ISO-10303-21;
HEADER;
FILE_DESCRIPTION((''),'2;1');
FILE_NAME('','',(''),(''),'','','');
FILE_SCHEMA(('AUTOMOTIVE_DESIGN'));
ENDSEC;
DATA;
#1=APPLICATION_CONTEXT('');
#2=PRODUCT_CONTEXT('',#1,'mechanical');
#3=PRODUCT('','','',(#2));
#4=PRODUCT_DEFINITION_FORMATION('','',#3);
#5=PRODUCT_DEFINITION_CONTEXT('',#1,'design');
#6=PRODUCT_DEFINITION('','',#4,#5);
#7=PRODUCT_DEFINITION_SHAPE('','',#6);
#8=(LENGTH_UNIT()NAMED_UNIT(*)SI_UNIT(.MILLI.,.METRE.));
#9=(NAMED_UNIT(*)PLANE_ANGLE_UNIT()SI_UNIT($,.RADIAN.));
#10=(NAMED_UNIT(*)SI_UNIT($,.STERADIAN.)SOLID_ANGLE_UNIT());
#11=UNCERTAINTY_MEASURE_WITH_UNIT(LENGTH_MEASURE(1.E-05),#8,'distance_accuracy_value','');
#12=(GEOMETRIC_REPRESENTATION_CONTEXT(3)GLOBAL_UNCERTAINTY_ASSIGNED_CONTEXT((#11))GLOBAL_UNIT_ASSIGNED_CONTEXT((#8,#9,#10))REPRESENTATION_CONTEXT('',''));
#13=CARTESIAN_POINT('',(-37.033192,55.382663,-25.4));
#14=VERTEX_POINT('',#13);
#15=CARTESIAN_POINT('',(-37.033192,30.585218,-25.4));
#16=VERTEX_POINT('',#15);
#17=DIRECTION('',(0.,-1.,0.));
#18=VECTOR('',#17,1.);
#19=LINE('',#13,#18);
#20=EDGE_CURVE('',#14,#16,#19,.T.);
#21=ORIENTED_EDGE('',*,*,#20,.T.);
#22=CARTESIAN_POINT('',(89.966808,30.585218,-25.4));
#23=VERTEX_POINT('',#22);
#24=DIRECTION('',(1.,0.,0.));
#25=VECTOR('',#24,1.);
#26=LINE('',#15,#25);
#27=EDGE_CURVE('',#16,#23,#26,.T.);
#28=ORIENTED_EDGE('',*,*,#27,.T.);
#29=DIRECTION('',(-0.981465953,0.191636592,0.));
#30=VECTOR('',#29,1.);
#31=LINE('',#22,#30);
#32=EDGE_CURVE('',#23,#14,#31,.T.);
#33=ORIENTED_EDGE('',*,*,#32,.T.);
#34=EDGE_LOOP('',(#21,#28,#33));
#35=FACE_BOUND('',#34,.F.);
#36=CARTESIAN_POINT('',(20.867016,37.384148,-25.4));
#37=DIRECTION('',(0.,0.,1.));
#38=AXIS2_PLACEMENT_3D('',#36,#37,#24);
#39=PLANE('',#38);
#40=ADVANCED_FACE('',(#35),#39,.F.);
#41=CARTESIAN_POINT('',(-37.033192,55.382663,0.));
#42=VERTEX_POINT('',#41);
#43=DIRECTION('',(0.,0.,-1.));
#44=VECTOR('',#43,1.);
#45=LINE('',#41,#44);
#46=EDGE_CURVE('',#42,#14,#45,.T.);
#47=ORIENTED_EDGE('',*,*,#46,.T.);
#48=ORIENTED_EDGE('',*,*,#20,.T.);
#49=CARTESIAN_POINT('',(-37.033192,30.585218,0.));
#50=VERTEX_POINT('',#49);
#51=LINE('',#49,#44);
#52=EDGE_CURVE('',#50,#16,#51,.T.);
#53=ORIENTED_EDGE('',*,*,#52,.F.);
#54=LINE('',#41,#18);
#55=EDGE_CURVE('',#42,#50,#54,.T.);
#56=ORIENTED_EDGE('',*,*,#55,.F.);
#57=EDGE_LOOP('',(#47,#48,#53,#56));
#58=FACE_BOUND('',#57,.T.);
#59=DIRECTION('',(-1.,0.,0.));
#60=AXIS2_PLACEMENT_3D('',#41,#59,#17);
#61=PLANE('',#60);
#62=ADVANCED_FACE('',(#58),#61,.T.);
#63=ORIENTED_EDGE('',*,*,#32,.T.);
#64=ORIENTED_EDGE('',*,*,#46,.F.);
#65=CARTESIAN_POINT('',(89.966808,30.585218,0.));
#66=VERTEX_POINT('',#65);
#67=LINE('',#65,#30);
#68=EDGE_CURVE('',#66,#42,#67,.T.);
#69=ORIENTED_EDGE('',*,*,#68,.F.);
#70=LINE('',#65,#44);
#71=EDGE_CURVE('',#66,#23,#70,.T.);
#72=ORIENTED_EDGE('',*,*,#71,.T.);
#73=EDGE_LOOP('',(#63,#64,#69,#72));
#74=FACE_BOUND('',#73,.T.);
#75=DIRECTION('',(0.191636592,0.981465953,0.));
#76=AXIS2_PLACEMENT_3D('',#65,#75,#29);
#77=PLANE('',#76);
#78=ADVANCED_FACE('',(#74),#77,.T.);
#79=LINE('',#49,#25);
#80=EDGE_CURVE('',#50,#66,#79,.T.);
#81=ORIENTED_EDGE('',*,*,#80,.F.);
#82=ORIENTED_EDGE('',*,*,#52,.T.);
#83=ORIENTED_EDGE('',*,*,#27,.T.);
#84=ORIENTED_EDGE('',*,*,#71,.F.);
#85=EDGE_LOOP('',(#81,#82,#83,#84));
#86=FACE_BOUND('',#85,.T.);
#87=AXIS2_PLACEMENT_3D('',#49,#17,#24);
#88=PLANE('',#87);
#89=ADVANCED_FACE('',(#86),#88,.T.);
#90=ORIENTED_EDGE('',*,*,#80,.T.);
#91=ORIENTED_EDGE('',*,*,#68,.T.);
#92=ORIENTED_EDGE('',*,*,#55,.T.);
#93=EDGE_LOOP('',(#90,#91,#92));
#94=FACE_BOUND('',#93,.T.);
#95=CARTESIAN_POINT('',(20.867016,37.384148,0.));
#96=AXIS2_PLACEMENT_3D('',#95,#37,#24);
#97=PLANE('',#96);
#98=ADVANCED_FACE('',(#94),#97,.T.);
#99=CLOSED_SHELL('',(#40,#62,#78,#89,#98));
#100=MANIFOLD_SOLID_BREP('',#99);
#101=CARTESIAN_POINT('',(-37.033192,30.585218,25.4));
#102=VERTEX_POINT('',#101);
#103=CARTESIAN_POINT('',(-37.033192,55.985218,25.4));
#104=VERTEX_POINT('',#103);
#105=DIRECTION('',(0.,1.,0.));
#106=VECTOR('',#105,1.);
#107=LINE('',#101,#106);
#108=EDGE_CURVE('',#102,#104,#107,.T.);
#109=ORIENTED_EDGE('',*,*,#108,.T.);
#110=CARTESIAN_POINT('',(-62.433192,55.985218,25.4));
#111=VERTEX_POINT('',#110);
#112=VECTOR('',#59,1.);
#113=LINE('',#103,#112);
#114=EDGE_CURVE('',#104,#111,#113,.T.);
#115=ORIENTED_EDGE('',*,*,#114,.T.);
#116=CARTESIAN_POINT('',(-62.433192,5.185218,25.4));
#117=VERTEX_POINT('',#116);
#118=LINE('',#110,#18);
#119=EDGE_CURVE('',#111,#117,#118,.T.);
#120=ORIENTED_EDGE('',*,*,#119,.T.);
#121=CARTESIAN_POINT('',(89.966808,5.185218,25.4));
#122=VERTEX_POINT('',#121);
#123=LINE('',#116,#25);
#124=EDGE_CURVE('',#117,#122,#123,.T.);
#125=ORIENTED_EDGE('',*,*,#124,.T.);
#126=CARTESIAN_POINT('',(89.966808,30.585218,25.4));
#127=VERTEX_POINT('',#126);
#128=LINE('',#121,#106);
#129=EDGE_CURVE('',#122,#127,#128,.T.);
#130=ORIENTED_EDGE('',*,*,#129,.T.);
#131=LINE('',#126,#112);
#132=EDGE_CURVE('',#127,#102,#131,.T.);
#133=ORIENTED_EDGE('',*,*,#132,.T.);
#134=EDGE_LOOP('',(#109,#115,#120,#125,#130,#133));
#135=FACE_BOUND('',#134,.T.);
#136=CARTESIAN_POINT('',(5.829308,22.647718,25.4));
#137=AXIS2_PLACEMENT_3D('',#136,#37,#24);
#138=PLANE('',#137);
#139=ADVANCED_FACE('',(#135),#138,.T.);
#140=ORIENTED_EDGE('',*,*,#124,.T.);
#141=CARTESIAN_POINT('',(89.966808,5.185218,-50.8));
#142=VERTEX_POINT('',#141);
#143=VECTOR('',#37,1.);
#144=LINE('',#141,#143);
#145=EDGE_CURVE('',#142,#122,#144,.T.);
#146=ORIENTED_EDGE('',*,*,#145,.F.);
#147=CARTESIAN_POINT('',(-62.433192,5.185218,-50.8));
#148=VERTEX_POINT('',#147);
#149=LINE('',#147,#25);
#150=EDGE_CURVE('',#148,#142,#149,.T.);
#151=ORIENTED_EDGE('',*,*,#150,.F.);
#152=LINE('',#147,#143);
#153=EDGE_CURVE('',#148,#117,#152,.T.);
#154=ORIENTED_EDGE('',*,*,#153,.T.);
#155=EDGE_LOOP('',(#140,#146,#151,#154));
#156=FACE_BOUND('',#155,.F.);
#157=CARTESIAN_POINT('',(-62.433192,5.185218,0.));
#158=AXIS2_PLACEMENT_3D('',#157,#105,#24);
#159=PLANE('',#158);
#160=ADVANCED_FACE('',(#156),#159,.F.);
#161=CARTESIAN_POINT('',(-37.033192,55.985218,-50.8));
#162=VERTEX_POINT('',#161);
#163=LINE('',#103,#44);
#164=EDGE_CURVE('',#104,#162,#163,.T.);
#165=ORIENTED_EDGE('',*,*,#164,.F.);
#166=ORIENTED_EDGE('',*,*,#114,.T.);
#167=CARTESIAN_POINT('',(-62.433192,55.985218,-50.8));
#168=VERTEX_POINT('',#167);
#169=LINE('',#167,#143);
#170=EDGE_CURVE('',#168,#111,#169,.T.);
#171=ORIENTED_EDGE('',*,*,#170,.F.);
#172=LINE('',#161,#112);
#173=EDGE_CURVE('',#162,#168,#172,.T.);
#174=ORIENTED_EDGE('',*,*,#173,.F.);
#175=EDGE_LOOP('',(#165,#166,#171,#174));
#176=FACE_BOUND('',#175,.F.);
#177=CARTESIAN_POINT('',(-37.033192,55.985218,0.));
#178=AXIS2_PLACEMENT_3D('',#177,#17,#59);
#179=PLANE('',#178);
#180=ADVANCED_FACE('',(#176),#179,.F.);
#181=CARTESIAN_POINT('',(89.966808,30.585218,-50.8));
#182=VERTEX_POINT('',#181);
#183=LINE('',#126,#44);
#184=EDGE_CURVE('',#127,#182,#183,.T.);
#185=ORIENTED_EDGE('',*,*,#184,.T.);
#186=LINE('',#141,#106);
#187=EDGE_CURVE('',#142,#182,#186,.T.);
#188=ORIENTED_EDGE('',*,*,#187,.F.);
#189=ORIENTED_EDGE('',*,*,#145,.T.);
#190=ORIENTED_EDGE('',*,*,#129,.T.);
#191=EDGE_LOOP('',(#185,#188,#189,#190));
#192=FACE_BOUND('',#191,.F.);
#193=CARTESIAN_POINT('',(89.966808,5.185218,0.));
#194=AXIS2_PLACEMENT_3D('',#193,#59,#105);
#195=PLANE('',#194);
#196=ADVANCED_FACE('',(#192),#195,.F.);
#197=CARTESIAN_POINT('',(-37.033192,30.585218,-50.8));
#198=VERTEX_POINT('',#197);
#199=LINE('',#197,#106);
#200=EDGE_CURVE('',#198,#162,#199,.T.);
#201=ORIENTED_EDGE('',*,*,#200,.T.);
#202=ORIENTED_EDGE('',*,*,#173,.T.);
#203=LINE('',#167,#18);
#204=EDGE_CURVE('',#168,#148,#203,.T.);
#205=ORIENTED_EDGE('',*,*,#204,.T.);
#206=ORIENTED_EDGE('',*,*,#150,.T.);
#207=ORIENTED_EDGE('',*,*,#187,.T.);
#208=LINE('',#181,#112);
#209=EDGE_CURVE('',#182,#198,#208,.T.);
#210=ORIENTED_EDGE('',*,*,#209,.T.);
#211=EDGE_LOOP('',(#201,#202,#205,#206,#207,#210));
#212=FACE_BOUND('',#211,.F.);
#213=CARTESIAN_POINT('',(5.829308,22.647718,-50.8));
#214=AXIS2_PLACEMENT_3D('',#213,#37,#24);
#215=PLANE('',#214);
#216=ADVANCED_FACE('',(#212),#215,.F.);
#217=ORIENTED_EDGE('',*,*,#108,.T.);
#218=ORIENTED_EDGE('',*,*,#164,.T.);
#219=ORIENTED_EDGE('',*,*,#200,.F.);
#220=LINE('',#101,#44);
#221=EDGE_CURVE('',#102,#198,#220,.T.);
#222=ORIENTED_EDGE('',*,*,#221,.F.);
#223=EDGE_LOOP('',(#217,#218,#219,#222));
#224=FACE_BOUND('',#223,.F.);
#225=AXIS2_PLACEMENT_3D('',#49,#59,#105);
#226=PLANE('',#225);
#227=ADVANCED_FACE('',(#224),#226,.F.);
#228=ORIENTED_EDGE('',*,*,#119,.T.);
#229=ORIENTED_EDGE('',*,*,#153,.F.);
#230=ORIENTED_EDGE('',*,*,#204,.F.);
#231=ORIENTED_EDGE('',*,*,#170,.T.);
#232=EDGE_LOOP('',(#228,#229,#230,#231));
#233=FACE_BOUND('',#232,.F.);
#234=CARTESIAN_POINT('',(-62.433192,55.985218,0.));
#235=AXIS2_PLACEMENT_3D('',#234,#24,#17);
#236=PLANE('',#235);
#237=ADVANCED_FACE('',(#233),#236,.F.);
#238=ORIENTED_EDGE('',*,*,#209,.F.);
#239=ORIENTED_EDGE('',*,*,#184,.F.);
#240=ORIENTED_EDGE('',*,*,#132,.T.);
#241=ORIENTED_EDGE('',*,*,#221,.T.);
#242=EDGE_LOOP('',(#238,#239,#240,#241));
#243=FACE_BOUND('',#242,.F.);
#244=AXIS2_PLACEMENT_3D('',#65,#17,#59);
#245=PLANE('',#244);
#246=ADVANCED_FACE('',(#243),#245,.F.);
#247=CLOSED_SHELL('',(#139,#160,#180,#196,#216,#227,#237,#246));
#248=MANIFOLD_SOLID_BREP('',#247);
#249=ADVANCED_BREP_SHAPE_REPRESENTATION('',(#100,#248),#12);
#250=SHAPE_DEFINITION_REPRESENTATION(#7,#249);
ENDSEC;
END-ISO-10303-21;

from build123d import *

# Parameters (mm, degrees)
F1_DEPTH = 50.8
F2_DEPTH = 25.4
F3_DEPTH = 25.4


with BuildPart() as f1:
    # F0 (on Top) → F1 (new body)
    with BuildSketch(Plane.XY):
        Polygon((-37.0331916732, 55.9852184538), (-62.4331916732, 55.9852184538), (-62.4331916732, 5.1852184538), (89.9668083268, 5.1852184538), (89.9668083268, 30.5852184538), (-37.0331916732, 30.5852184538), (-37.0331916732, 55.3826626255), align=None)
    extrude(amount=-F1_DEPTH)

    # F0 (on Top) → F3 (join)
    with BuildSketch(Plane.XY):
        Polygon((-37.0331916732, 55.9852184538), (-62.4331916732, 55.9852184538), (-62.4331916732, 5.1852184538), (89.9668083268, 5.1852184538), (89.9668083268, 30.5852184538), (-37.0331916732, 30.5852184538), (-37.0331916732, 55.3826626255), align=None)
    extrude(amount=F3_DEPTH)


with BuildPart() as f2:
    # F0 (on Top) → F2 (new body)
    with BuildSketch(Plane.XY):
        Polygon((89.9668083268, 30.5852184538), (-37.0331916732, 55.3826626255), (-37.0331916732, 30.5852184538), align=None)
    extrude(amount=-F2_DEPTH)


solid = Compound([f1.part, f2.part])
